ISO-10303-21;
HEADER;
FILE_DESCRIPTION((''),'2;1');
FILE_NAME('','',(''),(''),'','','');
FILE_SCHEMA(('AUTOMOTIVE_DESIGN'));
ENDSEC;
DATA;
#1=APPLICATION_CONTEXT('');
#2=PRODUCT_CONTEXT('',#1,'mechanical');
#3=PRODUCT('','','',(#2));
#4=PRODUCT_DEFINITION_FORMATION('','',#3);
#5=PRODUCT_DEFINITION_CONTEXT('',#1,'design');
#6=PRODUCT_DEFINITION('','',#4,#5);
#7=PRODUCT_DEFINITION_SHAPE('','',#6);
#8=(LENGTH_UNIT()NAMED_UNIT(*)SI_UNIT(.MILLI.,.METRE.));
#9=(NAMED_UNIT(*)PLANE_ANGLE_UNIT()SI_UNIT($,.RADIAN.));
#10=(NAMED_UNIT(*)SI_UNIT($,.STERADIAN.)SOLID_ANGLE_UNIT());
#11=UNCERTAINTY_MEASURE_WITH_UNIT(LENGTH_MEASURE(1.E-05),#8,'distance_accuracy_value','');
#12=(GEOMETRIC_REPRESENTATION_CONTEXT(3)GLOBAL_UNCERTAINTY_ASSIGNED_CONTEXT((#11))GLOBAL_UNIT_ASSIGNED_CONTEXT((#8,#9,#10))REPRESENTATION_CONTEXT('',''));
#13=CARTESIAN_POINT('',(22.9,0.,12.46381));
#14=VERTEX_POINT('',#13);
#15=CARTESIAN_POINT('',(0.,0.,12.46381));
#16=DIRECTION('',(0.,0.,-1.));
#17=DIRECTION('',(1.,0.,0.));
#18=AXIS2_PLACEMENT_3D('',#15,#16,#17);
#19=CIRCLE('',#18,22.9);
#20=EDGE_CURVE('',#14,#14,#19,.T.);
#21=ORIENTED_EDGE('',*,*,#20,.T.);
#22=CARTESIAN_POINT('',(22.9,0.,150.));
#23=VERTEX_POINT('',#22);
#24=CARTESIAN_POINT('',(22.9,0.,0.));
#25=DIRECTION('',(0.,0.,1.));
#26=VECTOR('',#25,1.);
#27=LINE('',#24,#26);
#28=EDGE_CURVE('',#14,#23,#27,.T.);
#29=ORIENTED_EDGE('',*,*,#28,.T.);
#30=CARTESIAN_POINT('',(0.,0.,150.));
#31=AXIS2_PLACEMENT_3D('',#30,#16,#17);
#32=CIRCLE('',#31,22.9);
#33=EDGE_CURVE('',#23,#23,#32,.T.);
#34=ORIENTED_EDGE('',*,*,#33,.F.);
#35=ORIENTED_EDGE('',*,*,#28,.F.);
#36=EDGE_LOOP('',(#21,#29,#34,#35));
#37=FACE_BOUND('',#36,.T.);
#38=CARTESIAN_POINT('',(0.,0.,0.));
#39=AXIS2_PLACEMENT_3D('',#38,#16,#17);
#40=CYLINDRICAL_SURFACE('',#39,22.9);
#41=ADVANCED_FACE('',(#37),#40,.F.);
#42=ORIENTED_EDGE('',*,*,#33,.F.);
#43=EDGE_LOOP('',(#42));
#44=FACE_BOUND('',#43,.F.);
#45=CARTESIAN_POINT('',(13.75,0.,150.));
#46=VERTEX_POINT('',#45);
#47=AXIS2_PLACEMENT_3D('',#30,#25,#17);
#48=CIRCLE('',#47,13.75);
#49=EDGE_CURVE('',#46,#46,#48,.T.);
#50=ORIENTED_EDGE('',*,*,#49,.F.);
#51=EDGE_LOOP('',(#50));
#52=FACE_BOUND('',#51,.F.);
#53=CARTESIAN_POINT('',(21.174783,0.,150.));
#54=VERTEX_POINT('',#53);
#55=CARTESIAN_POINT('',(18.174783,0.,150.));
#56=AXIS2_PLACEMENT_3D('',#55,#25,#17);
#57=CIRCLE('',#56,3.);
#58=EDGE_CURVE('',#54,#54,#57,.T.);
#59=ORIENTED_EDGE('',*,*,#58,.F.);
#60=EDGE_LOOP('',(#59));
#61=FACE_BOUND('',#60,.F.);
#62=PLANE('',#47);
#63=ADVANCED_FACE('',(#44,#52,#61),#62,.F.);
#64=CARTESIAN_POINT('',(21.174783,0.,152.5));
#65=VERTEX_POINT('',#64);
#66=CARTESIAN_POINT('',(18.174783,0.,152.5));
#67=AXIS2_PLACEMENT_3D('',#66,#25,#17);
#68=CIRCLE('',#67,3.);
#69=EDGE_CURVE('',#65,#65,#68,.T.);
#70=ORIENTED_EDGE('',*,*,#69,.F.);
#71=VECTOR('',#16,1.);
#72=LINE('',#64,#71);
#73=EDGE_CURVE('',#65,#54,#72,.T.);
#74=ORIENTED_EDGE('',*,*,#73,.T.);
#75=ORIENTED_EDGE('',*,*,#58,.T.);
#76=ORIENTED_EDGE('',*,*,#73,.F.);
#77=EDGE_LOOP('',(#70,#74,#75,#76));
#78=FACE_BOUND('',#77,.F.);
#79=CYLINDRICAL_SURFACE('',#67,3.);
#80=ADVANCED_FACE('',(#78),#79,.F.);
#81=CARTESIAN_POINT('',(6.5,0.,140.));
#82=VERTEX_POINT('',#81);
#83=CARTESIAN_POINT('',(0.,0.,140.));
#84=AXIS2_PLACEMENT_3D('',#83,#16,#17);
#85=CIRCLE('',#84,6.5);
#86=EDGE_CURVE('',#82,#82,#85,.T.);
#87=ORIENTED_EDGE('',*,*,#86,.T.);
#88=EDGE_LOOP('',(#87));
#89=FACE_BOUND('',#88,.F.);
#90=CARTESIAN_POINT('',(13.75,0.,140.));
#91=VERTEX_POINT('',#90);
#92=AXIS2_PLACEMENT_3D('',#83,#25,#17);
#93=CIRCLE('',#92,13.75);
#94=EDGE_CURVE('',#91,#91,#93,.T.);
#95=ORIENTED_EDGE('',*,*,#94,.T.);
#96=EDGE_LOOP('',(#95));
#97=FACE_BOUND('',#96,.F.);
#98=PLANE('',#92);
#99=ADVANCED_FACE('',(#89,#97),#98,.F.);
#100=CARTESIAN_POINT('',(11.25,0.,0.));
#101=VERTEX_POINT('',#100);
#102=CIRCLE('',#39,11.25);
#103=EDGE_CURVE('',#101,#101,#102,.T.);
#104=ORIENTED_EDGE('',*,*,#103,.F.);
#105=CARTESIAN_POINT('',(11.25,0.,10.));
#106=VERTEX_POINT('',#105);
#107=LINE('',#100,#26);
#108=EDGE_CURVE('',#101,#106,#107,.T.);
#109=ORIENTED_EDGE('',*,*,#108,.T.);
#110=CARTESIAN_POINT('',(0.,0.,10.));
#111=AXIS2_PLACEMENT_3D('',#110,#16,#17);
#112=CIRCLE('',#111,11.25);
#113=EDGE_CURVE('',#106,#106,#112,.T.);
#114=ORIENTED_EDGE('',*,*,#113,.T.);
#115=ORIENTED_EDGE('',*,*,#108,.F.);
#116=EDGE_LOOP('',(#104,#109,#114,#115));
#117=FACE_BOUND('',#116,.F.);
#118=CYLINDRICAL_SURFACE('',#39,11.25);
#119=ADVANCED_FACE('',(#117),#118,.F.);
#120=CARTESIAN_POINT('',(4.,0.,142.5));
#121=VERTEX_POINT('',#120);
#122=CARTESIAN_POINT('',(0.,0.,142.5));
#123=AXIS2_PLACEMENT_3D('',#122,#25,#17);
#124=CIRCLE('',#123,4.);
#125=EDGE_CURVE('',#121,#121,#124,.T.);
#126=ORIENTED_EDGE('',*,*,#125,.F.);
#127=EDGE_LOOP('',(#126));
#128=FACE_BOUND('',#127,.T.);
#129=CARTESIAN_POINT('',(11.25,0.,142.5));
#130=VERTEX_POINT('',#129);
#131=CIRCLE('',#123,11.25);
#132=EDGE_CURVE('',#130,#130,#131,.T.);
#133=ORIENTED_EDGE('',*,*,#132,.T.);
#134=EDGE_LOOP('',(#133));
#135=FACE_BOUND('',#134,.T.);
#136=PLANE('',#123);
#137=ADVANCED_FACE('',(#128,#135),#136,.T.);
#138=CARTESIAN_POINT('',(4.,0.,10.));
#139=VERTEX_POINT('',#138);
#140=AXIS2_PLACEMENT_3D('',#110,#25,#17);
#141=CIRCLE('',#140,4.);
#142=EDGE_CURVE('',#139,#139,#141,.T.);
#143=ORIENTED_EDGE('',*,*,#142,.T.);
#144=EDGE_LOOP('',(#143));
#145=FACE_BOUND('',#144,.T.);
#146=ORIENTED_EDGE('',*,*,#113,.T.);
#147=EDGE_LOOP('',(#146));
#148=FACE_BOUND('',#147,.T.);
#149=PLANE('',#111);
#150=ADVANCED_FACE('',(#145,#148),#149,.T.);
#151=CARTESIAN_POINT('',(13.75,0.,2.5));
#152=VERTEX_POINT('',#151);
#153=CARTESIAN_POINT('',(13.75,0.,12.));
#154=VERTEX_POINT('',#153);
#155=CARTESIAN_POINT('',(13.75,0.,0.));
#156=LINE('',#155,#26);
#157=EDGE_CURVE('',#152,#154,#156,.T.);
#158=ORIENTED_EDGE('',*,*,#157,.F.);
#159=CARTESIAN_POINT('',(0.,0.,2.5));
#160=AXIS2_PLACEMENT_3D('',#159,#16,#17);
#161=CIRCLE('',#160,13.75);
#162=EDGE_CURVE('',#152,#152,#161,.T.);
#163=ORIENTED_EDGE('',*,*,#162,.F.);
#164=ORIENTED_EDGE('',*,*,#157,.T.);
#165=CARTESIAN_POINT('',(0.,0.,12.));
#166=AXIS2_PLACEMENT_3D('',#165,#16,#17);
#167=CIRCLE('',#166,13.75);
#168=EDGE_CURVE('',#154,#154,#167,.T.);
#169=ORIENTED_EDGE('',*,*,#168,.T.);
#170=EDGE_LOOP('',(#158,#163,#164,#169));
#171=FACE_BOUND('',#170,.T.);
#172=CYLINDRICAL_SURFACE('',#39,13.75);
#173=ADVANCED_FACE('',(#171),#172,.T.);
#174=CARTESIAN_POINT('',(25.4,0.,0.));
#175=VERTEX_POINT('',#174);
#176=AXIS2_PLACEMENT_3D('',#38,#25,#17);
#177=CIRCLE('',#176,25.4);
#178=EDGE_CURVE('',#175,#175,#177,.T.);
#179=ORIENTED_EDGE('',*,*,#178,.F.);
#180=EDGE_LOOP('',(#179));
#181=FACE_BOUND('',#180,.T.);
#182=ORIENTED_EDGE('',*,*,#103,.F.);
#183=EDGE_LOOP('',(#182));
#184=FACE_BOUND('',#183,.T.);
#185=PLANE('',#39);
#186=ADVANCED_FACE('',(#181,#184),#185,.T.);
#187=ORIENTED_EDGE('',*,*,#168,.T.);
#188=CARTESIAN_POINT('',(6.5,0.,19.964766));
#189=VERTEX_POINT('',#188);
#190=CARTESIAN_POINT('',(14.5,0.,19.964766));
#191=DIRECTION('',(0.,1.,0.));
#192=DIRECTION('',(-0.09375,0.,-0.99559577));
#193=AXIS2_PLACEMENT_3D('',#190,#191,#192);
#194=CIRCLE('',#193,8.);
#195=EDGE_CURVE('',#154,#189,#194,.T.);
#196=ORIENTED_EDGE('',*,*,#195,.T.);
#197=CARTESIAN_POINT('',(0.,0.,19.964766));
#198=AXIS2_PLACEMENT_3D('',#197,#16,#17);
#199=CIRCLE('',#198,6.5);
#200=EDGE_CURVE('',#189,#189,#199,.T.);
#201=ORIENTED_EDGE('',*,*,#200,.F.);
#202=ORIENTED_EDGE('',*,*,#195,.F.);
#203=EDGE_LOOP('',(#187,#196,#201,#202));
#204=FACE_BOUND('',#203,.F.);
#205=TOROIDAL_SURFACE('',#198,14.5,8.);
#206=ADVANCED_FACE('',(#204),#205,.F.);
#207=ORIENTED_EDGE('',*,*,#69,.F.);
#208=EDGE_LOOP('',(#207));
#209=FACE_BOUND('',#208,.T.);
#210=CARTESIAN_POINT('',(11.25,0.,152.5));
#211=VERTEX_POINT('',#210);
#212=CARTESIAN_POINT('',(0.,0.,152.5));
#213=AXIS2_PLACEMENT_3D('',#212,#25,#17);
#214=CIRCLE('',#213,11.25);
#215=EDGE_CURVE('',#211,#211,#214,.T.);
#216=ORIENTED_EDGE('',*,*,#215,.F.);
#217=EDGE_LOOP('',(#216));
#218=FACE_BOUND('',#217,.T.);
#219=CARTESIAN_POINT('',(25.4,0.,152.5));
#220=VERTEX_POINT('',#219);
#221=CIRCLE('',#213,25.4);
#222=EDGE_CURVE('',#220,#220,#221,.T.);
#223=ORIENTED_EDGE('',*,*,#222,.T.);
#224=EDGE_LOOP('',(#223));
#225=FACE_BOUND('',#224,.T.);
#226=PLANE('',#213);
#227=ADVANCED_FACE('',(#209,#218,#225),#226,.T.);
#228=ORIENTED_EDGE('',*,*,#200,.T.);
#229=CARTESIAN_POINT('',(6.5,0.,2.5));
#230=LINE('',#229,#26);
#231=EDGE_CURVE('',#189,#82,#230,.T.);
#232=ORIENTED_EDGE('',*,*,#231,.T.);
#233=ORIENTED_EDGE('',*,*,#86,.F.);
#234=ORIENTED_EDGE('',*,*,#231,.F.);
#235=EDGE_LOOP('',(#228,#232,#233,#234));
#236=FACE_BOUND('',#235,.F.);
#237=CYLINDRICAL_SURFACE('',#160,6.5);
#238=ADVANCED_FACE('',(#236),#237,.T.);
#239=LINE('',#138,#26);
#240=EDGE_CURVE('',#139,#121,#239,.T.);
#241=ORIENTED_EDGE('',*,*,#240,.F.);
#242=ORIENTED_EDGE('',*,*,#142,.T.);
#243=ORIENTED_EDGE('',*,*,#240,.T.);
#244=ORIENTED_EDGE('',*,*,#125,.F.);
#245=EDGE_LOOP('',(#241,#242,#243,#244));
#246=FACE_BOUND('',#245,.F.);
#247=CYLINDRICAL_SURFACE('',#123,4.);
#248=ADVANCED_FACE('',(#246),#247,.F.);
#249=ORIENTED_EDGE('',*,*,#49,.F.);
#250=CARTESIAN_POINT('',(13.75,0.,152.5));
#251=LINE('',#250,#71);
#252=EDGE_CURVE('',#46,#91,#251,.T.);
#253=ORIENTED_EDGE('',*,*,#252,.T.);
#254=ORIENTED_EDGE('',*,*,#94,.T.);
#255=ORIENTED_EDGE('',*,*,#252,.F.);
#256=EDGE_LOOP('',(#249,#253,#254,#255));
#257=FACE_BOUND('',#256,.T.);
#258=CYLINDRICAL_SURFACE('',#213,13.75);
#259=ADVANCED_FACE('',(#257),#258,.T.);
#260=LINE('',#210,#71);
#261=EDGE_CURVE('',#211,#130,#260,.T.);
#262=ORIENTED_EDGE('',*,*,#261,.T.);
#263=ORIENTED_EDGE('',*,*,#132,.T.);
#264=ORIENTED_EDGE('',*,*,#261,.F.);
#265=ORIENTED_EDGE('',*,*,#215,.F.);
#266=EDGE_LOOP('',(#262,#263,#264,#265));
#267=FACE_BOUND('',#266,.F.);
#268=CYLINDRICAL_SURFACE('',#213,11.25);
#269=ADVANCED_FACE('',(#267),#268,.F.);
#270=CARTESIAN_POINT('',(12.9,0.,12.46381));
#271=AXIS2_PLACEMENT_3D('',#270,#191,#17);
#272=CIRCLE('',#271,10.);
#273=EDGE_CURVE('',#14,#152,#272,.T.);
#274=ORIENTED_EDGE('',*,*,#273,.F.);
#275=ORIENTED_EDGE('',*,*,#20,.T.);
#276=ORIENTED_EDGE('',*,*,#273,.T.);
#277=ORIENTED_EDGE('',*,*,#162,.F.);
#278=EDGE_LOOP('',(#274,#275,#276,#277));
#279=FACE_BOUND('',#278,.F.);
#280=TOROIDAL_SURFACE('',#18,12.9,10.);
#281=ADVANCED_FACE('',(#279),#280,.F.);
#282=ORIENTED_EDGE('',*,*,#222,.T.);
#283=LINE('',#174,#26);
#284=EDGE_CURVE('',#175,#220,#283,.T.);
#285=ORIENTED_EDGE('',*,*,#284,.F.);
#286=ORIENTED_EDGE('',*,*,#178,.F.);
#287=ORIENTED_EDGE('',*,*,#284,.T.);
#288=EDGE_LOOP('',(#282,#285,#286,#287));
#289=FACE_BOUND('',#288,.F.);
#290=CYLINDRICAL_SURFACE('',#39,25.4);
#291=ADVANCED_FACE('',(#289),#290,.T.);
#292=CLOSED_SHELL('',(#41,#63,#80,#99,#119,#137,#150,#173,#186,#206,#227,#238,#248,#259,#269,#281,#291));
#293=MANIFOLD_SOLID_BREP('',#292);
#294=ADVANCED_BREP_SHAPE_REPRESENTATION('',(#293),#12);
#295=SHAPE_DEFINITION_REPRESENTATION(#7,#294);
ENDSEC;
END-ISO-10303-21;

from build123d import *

# Parameters (mm, degrees)
F0_R      = 25.4
F1_DEPTH  = 152.5
F2_T      = -2.5
F3_R      = 6.5
F4_DEPTH  = 150
F5_T      = -2.5
F6_R      = 13.75
F7_DEPTH  = 12
F8_R      = 11.25
F11_DEPTH = 10
F12_R     = 25.4
F13_DEPTH = 2.5
F14_R     = 13.75
F15_DEPTH = 12.5
F16_R     = 11.25
F17_DEPTH = 10
F18_R     = 4
F19_DEPTH = 142.501
F20_R     = 3
F21_DEPTH = 25


# Not quite as in the source:
# - a fillet or chamfer that OpenCascade refuses, or shapes differently, is made with other operations: its cross-section is extruded or revolved along the edge and cut away or added


with BuildPart() as f1:
    # F0 (on Top) → F1 (new body)
    with BuildSketch(Plane.XY):
        Circle(F0_R)
    extrude(amount=F1_DEPTH)

    # F2
    f2_openings = [f1.faces().sort_by_distance(p)[0] for p in [
        (0, 0, 152.5),
    ]]
    offset(amount=F2_T, openings=f2_openings)

    # F3 (on face) → F4 (join)
    with BuildSketch(Plane.XY.offset(2.5)):
        Circle(F3_R)
    extrude(amount=F4_DEPTH)

    # F5: a shell. OpenCascade refuses it in one call, so the cavity is built on its own and cut out:
    # the body offset inwards by the wall thickness, plus a prism from it out through each open face.
    f5_core = offset(f1.part, amount=F5_T, kind=Kind.INTERSECTION, mode=Mode.PRIVATE)
    f5_exits = [f5_core.faces().sort_by_distance(p)[0] for p in [
        (0, 0, 150),
    ]]
    add(f5_core, mode=Mode.SUBTRACT)
    extrude(f5_exits, amount=-F5_T, mode=Mode.SUBTRACT)

    # F6 (on face) → F7 (join)
    with BuildSketch(Plane(origin=(0, 0, 0), x_dir=(1, 0, 0), z_dir=(0, 0, -1))):
        Circle(F6_R)
    extrude(amount=-F7_DEPTH)

    # F9: fillet of radius 10 on 1 edges, made by hand

    # F9_s1 → F9_t2 (revolve)
    with BuildSketch(Plane.XZ):
        with BuildLine():
            ThreePointArc((22.9, 12.4638095124), (20.2654599313, 5.6999348832), (13.75, 2.5))
            Line((13.75, 2.5), (22.9, 2.5))
            Line((22.9, 2.5), (22.9, 12.4638095124))
        make_face()
    revolve(axis=Axis((0, 0, 2.5), (0, 0, -1)))

    # F10: fillet of radius 8 on 1 edges, made by hand

    # F10_s1 → F10_t2 (revolve)
    with BuildSketch(Plane.XZ):
        with BuildLine():
            ThreePointArc((13.75, 12), (8.5839202169, 14.5796013539), (6.5, 19.964766161))
            Line((6.5, 19.964766161), (6.5, 12))
            Line((6.5, 12), (13.75, 12))
        make_face()
    revolve(axis=Axis((0, 0, 12), (0, 0, -1)))

    # F8 (on face) → F11 (cut)
    with BuildSketch(Plane(origin=(0, 0, 0), x_dir=(1, 0, 0), z_dir=(0, 0, -1))):
        Circle(F8_R)
    extrude(amount=-F11_DEPTH, mode=Mode.SUBTRACT)

    # F12 (on face) → F13 (join)
    with BuildSketch(Plane.XY.offset(152.5)):
        Circle(F12_R)
    extrude(amount=-F13_DEPTH)

    # F14 (on face) → F15 (join)
    with BuildSketch(Plane.XY.offset(152.5)):
        Circle(F14_R)
    extrude(amount=-F15_DEPTH)

    # F16 (on face) → F17 (cut)
    with BuildSketch(Plane.XY.offset(152.5)):
        Circle(F16_R)
    extrude(amount=-F17_DEPTH, mode=Mode.SUBTRACT)

    # F18 (on face) → F19 (cut, through all)
    with BuildSketch(Plane.XY.offset(142.5)):
        Circle(F18_R)
    extrude(amount=-F19_DEPTH, mode=Mode.SUBTRACT)

    # F20 (on face) → F21 (cut)
    with BuildSketch(Plane.XY.offset(152.5)):
        with Locations((18.1747831392, 0)):
            Circle(F20_R)
    extrude(amount=-F21_DEPTH, mode=Mode.SUBTRACT)


solid = f1.part
